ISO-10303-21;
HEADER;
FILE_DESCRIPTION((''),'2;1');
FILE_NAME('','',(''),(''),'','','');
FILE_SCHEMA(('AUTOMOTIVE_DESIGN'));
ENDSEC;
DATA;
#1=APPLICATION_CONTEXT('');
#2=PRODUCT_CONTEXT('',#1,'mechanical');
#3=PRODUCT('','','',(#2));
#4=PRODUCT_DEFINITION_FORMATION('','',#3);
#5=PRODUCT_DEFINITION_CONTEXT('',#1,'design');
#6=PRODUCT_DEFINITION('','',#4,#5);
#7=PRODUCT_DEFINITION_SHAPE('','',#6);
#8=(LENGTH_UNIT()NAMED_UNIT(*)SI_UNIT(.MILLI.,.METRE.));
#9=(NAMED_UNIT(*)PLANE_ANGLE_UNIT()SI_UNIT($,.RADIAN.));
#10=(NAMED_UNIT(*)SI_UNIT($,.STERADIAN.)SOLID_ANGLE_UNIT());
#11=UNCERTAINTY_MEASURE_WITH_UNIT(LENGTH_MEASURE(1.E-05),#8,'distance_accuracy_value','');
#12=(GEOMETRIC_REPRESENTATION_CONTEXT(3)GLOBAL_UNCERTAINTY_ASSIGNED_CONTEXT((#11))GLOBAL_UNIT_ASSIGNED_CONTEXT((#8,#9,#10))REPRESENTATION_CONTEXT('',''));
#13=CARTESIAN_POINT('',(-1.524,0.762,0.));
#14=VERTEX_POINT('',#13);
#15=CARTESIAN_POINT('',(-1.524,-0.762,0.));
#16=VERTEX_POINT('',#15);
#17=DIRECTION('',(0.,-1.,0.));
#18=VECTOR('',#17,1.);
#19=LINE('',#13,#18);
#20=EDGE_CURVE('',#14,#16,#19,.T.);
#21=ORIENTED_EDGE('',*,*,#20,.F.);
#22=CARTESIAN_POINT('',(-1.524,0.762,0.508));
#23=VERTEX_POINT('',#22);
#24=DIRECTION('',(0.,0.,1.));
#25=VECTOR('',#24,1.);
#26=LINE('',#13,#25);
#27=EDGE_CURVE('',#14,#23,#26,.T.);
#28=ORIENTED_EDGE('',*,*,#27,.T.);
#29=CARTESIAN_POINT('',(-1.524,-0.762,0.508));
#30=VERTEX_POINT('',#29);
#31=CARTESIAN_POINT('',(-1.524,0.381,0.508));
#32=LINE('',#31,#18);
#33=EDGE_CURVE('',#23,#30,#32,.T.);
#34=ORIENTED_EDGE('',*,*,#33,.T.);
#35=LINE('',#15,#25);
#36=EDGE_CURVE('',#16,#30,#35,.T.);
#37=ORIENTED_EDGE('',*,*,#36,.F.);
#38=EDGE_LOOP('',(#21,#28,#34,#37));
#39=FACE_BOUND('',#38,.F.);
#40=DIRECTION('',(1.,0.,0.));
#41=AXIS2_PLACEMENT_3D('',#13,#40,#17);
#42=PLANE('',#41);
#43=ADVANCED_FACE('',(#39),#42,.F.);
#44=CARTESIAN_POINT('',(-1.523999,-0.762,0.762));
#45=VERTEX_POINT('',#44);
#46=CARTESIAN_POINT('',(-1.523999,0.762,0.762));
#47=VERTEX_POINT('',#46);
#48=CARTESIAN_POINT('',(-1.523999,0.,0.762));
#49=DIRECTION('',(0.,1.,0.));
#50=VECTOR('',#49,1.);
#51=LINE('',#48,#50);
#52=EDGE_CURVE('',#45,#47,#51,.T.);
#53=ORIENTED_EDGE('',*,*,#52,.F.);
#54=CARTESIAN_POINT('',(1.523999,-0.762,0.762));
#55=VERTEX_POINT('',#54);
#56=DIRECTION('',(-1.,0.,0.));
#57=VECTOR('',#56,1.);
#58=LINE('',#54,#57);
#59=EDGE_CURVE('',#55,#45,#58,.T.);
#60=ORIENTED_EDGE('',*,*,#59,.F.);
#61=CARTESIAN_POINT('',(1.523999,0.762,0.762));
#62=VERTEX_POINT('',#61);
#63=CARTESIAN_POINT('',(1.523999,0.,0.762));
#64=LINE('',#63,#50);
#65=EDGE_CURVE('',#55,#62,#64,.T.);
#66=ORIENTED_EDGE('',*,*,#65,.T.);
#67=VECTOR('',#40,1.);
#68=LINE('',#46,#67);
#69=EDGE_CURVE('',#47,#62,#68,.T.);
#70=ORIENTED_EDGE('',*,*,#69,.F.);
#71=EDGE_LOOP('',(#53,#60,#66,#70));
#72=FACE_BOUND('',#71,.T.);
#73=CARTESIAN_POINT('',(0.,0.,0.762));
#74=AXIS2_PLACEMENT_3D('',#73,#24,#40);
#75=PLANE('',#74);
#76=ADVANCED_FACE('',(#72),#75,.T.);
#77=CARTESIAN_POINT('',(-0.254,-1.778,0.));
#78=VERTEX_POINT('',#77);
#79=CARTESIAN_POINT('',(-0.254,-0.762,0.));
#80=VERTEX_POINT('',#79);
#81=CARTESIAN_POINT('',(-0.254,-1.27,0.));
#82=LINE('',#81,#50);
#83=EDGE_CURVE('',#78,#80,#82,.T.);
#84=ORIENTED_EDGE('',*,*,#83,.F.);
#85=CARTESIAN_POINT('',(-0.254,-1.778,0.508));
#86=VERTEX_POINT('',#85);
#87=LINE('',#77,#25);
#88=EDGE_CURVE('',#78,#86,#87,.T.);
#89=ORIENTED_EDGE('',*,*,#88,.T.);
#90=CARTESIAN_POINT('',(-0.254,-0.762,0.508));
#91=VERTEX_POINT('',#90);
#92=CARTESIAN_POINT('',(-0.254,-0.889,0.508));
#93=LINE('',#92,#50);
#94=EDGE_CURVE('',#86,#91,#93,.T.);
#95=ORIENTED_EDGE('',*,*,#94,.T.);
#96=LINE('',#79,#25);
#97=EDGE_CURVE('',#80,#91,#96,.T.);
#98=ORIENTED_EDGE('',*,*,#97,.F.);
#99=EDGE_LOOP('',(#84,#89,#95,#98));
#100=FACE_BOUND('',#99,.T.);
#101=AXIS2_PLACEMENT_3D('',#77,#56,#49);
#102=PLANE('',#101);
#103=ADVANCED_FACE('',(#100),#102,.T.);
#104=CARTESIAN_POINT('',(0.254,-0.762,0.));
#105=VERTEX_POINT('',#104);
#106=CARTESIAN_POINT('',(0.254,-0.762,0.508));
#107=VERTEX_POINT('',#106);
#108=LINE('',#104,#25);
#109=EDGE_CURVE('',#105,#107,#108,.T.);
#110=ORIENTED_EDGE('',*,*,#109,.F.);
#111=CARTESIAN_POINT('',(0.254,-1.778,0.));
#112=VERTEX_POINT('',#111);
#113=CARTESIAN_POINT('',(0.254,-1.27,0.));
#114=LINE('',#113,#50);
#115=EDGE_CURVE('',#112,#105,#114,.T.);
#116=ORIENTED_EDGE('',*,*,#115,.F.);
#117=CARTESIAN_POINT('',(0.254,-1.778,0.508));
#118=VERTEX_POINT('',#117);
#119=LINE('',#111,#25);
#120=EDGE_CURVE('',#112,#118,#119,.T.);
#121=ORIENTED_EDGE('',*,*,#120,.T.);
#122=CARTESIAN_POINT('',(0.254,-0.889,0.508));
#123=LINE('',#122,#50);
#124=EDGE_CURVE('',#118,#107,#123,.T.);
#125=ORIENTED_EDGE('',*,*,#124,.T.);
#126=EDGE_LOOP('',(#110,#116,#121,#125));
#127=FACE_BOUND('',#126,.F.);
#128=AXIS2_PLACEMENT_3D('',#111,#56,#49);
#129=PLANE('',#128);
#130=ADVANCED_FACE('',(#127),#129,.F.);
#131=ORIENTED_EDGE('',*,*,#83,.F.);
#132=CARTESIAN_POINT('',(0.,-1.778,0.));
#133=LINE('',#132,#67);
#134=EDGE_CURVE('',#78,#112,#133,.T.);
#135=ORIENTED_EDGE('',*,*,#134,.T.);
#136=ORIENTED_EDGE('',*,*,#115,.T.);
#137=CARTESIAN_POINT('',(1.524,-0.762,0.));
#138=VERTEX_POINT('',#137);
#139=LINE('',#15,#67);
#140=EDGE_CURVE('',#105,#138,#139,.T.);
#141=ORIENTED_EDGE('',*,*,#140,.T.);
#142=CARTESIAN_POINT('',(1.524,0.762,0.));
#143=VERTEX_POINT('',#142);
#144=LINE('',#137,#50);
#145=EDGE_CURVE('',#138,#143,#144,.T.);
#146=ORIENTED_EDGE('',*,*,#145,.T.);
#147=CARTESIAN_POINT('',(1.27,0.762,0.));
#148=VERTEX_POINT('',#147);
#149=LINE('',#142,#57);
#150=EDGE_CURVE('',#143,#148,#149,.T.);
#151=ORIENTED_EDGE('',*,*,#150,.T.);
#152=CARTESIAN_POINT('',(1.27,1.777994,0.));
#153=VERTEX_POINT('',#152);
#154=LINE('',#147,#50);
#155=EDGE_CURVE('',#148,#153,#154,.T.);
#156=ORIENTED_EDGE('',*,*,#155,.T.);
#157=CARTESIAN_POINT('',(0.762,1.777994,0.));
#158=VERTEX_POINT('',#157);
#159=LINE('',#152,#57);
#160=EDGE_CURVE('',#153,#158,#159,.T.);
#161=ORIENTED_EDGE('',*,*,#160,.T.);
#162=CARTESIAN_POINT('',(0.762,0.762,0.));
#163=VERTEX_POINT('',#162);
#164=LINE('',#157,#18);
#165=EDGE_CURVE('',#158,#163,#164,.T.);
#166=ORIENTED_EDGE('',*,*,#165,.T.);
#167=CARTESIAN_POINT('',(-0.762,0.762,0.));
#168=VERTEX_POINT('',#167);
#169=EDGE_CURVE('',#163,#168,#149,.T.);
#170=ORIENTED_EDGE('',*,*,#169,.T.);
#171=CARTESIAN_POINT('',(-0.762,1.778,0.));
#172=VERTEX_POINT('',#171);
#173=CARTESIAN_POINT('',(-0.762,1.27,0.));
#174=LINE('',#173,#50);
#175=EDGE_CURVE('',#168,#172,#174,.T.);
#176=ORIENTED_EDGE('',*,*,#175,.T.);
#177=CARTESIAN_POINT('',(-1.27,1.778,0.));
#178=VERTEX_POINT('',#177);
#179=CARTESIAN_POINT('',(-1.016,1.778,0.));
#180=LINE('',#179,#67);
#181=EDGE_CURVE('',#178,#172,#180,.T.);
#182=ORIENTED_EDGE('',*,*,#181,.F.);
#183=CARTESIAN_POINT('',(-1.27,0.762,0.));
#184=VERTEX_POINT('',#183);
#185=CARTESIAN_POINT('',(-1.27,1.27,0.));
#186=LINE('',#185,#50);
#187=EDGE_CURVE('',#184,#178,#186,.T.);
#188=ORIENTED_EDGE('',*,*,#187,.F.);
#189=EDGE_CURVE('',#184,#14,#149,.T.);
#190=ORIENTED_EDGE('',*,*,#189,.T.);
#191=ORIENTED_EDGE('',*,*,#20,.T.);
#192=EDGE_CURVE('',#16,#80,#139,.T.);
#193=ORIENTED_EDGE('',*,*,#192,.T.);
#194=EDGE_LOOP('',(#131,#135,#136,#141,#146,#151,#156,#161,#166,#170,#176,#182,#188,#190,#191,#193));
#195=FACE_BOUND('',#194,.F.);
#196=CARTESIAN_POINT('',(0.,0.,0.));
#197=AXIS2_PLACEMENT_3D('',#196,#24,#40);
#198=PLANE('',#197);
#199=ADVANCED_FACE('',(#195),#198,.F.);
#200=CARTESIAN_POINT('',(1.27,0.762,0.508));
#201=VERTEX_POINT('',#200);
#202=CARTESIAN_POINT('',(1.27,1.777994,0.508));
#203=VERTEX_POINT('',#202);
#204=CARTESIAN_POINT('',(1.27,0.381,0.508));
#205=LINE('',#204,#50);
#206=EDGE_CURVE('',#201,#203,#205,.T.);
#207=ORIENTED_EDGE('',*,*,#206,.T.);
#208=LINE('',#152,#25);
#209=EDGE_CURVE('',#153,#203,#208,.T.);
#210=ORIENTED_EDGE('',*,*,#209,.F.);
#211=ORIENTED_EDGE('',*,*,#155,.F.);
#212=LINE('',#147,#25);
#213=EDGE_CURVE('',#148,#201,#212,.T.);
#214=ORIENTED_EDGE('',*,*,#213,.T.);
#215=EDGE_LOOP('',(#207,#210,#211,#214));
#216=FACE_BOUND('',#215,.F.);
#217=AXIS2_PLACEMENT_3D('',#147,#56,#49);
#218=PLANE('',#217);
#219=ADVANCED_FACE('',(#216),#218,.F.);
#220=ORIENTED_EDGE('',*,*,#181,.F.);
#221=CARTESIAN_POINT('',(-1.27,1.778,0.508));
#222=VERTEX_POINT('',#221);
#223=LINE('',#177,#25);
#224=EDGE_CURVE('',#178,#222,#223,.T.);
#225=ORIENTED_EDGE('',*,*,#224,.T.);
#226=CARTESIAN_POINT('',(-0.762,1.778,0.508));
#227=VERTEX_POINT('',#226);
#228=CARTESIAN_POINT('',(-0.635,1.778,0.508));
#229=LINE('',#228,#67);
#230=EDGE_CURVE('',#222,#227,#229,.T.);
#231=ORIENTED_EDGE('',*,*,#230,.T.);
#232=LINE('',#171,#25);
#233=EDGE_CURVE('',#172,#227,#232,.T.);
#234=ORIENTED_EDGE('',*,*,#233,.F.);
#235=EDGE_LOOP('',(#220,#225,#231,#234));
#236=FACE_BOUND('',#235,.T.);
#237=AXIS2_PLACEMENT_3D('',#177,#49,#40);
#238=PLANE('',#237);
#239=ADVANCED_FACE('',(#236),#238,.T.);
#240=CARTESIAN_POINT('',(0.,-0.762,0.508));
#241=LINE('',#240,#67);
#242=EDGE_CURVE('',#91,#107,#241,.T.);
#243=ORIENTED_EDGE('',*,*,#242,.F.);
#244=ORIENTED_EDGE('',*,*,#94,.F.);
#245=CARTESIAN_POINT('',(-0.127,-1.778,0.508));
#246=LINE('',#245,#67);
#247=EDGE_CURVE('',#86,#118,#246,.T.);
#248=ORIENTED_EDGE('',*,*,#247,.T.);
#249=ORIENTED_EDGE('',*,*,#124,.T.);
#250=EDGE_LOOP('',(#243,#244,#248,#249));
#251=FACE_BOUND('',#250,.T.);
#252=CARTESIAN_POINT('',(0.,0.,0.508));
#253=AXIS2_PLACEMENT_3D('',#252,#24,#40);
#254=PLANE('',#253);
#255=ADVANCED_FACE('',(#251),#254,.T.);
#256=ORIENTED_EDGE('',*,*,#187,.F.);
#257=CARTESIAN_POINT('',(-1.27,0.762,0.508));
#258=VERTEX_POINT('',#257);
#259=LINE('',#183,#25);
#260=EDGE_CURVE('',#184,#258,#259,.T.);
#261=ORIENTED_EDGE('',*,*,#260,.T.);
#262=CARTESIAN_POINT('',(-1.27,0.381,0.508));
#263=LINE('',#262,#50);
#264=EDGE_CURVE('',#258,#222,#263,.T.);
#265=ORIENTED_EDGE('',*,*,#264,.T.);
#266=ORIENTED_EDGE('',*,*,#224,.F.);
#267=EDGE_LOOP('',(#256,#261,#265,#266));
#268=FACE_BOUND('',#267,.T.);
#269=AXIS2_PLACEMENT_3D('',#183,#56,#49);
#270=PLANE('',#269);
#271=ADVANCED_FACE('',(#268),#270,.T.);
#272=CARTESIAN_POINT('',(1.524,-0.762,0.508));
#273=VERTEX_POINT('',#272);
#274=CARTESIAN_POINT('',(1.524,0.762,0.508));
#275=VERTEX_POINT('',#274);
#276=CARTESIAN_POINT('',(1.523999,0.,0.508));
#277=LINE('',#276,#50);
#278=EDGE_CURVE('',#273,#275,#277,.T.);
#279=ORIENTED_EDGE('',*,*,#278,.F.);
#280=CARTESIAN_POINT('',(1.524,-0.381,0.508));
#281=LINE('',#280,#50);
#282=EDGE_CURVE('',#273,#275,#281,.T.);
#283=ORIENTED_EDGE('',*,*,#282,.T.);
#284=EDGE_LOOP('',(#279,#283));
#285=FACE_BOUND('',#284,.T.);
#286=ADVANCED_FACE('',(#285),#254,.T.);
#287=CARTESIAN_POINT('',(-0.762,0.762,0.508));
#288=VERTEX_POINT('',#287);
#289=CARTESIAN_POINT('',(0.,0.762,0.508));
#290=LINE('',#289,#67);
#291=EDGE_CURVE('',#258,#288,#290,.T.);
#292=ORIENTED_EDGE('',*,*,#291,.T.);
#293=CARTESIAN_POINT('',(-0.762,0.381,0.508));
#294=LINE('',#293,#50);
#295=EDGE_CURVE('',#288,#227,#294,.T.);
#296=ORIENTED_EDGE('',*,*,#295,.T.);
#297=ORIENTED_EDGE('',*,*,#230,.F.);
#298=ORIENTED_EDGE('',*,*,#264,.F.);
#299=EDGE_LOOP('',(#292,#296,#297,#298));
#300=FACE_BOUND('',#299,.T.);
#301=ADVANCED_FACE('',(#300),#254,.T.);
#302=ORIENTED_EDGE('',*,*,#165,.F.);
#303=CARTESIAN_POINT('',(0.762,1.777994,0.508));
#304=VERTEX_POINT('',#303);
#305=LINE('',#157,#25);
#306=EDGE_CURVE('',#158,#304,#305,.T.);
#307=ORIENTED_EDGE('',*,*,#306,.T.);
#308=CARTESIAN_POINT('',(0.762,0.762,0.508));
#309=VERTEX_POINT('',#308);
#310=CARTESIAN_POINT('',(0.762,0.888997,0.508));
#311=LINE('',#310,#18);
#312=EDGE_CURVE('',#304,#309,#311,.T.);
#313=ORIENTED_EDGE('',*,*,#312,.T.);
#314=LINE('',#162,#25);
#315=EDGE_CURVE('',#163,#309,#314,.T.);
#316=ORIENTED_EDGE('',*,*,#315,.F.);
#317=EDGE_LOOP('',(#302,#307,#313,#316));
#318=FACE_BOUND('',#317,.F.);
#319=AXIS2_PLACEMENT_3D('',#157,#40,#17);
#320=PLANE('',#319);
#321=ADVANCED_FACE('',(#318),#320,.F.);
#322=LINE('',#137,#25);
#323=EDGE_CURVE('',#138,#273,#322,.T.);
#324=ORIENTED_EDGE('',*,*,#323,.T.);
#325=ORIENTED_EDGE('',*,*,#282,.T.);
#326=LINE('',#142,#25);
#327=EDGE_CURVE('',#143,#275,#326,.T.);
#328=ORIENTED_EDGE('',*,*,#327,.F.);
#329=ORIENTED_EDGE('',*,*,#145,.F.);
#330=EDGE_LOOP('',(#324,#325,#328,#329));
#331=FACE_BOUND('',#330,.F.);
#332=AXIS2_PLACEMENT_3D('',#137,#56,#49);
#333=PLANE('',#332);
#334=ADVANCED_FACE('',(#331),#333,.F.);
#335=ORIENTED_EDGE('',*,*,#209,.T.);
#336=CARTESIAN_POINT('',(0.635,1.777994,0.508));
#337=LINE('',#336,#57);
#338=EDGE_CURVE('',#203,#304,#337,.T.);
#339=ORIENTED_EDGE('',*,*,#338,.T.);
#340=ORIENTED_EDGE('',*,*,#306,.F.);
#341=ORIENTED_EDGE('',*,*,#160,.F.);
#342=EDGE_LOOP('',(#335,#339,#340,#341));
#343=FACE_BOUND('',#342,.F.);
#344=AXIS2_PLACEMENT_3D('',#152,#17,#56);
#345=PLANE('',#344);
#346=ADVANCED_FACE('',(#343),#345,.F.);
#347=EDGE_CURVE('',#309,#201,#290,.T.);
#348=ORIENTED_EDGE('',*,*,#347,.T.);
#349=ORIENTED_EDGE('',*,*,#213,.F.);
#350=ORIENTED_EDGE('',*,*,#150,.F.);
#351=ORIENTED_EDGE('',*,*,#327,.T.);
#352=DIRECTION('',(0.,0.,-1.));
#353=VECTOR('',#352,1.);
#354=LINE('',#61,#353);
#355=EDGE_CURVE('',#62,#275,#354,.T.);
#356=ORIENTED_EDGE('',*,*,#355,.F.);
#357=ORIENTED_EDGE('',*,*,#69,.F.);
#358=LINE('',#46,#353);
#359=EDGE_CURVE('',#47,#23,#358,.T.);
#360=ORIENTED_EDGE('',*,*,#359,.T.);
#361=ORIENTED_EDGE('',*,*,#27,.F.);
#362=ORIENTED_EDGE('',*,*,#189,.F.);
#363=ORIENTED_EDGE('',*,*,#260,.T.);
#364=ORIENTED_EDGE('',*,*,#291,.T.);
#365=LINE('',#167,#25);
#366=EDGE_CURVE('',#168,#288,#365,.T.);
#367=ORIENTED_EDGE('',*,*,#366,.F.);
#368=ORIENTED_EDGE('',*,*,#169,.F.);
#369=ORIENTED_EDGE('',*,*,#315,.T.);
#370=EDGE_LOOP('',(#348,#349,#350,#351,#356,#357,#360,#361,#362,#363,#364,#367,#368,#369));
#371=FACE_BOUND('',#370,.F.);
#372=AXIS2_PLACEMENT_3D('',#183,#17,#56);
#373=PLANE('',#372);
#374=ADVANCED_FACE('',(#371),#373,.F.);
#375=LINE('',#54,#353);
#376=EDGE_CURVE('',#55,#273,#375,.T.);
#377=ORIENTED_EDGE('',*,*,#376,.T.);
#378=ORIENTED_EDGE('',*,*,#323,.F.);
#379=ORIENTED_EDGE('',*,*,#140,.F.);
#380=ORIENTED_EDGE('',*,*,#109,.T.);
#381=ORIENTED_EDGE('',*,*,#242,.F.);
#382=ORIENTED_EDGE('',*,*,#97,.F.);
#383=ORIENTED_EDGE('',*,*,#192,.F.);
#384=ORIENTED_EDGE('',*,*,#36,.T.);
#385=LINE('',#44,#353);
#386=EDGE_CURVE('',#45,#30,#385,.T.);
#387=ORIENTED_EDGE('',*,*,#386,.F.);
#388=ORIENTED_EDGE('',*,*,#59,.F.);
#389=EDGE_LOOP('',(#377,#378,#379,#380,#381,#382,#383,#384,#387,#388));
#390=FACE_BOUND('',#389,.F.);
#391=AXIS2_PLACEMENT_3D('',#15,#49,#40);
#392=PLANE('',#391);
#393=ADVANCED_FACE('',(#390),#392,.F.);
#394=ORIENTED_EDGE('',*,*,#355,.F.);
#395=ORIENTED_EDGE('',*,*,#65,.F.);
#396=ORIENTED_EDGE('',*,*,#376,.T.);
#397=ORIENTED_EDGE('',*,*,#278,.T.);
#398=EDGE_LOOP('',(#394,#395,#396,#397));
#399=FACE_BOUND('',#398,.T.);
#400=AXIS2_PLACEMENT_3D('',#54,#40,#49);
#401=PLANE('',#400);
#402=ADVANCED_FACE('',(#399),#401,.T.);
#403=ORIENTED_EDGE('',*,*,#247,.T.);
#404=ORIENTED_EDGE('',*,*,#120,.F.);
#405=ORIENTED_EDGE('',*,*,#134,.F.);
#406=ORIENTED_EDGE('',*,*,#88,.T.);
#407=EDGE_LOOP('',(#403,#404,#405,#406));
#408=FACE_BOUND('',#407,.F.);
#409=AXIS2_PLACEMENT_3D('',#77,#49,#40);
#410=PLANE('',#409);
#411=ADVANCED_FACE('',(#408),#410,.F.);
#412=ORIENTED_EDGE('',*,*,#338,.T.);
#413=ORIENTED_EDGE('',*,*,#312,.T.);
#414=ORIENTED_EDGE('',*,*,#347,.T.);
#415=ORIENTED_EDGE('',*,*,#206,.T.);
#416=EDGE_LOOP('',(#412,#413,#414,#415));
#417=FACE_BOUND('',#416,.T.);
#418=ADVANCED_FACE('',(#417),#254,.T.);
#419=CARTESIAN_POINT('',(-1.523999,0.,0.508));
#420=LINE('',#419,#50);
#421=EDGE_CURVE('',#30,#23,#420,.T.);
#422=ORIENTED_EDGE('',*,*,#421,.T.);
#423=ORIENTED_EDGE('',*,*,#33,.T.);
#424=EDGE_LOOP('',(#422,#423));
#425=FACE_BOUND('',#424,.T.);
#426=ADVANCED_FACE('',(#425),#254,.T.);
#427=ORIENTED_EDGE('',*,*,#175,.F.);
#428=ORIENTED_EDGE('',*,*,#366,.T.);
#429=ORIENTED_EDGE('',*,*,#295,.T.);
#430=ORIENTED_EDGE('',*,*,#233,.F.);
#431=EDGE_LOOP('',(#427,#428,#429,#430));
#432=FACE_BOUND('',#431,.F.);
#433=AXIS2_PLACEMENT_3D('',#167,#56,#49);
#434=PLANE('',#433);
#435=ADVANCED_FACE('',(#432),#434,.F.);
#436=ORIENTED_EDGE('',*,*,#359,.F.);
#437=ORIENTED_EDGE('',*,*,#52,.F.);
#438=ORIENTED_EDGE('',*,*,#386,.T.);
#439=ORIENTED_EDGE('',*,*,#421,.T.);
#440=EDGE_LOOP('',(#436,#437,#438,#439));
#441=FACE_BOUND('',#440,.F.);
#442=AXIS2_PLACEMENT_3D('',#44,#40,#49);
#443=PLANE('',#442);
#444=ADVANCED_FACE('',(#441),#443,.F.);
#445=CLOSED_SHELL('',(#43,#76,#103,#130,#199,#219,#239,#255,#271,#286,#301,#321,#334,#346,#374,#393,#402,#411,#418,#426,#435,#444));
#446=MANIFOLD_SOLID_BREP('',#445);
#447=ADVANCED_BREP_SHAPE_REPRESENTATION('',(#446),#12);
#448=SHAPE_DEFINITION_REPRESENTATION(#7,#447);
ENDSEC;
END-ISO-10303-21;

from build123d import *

# Parameters (mm, degrees)
F0_W     = 0.508
F0_H     = 1.016
F1_DEPTH = 0.762
F2_W     = 5.1749609411
F2_H     = 4.1793081909
F2_W_2   = 3.0479989649
F2_H_2   = 1.524
F3_DEPTH = 0.254


# Not quite as in the source:
# - ends of sketch curves that miss each other by under 0.0002 mm in the source are joined


with BuildPart() as f1:
    # F0 (on Top) → F1 (new body)
    with BuildSketch(Plane.XY):
        Polygon((-1.27, 0.762), (-1.524, 0.762), (-1.524, -0.762), (-0.254, -0.762), (0.254, -0.762), (1.524, -0.762), (1.524, 0.762), (1.27, 0.762), (0.762, 0.762), (-0.762, 0.762), align=None)
        with Locations((-1.016, 1.27)):
            Rectangle(F0_W, F0_H)
        with Locations((0, -1.27)):
            Rectangle(F0_W, F0_H)
        Polygon((0.762, 1.7779941872), (0.762, 0.7619941872), (1.27, 0.762), (1.27, 1.7779941872), align=None)
    extrude(amount=F1_DEPTH)

    # F2 (on face) → F3 (cut)
    with BuildSketch(Plane.XY.offset(0.762)):
        Rectangle(F2_W, F2_H)
        Rectangle(F2_W_2, F2_H_2, mode=Mode.SUBTRACT)
    extrude(amount=-F3_DEPTH, mode=Mode.SUBTRACT)


solid = f1.part
